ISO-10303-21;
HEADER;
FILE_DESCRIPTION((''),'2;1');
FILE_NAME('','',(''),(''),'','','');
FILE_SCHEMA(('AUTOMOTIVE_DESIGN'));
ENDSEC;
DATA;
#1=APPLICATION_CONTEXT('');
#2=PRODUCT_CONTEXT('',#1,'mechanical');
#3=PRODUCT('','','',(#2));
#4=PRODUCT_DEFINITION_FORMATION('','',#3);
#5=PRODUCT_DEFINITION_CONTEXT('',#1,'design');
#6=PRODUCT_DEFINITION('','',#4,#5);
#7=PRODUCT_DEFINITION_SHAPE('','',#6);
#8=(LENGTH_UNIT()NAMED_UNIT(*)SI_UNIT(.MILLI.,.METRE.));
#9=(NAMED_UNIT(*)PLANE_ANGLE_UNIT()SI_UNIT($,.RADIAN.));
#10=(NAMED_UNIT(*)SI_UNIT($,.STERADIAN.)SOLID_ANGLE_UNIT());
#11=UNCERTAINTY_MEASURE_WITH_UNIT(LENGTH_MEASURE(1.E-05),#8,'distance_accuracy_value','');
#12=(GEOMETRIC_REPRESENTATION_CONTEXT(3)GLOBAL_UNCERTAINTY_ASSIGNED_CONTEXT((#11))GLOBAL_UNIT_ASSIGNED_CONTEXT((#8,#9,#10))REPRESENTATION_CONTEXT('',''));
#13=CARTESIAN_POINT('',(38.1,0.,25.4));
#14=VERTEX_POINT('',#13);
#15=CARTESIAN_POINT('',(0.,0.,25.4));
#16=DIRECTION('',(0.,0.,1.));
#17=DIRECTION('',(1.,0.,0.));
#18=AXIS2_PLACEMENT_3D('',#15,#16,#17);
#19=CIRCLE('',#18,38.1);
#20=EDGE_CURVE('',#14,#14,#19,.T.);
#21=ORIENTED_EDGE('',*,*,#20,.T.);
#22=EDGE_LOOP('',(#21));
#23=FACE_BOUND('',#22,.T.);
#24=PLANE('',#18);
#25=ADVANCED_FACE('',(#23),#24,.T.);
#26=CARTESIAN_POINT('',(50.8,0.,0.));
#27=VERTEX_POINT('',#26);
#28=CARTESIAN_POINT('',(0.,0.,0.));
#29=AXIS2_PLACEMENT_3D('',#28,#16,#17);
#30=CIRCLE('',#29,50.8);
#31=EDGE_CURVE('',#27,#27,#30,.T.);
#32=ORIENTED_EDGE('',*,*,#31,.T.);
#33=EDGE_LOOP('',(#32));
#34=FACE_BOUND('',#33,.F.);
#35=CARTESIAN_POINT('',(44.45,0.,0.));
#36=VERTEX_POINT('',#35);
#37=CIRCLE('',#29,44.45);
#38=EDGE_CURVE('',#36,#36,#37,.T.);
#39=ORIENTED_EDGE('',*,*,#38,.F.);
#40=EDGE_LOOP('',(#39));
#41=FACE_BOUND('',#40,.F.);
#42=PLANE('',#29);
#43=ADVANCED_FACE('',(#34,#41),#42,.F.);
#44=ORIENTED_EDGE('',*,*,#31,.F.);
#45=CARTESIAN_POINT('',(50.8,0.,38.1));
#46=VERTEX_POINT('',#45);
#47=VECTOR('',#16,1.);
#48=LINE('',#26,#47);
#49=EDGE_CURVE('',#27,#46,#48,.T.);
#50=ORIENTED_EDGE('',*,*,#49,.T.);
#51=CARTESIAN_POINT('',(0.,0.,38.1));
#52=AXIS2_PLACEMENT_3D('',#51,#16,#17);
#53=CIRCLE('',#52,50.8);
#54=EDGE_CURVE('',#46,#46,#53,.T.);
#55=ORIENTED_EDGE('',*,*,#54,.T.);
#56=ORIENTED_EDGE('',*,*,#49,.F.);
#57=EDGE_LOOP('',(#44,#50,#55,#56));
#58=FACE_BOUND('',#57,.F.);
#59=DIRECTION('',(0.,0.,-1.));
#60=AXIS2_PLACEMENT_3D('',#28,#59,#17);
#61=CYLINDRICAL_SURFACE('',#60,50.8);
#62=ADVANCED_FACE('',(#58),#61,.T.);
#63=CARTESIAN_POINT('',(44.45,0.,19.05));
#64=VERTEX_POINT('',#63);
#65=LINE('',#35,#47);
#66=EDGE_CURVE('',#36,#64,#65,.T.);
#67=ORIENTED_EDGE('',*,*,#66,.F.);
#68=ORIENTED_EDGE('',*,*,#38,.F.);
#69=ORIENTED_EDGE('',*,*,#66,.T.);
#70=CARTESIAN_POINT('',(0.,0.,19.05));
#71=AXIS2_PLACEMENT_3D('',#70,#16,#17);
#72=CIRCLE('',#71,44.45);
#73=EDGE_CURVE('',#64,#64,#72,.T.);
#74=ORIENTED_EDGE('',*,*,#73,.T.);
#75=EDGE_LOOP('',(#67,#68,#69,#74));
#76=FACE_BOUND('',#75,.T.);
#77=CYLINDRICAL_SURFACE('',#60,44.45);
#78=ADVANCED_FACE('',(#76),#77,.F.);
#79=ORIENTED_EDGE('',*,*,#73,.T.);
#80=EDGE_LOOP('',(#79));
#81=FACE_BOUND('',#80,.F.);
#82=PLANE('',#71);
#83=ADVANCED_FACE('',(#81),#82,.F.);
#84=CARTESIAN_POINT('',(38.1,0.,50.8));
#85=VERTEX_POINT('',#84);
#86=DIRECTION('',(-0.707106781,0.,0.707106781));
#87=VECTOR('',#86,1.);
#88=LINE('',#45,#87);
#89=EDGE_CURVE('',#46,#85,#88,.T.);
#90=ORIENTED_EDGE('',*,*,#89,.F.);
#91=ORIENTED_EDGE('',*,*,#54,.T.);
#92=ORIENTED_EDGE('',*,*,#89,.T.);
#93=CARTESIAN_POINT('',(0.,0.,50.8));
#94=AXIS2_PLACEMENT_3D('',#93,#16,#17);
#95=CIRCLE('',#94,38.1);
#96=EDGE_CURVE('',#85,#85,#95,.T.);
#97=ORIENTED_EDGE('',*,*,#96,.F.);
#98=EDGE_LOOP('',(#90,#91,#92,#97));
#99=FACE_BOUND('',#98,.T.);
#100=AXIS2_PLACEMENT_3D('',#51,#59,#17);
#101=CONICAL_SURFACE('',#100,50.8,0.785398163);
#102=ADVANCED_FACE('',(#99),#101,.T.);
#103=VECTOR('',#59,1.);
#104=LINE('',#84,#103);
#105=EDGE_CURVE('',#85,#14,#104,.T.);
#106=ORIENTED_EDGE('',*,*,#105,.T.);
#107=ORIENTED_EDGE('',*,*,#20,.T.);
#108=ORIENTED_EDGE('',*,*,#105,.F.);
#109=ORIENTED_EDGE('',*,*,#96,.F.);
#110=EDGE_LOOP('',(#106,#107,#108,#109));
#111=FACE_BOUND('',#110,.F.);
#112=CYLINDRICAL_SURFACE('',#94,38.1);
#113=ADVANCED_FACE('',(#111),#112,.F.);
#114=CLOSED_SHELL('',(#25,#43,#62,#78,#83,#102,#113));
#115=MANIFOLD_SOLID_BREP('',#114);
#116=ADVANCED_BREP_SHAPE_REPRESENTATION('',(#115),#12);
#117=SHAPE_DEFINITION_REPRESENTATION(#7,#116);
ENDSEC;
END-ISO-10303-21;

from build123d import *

# Parameters (mm, degrees)
F0_R     = 50.8
F1_DEPTH = 50.8
F2_SIZE  = 12.7
F3_DEPTH = 25.4
F4_T     = 6.35


# Not quite as in the source:
# - a shell that OpenCascade refuses in one call is made with other operations: the cavity is built on its own and cut out


with BuildPart() as f1:
    # F0 (on Top) → F1 (new body)
    with BuildSketch(Plane.XY):
        Circle(F0_R)
    extrude(amount=F1_DEPTH)

    # F2
    f2_edges = [f1.edges().sort_by_distance(p)[0] for p in [
        (-50.8, 0, 50.8),
    ]]
    chamfer(f2_edges, length=F2_SIZE)

    # F3 (cut): a face of the model
    f3_faces = [f1.faces().sort_by_distance(p)[0] for p in [
        (0, 0, 50.8),
    ]]
    extrude(f3_faces, amount=-F3_DEPTH, mode=Mode.SUBTRACT)

    # F4: shell of thickness 6.35, made by hand


with BuildPart() as f4_core1:
    # F4_t2: copy of F1
    add(f1.part)

    # the walls: a layer under each face that stays
    f4_faces = [f4_core1.faces().sort_by_distance(p)[0] for p in [
        (-50.8, 0, 19.05),
        (-44.45, 0, 44.45),
        (-38.1, 0, 38.1),
        (0, 0, 25.4),
    ]]
    thicken(f4_faces, amount=-F4_T, mode=Mode.SUBTRACT)

    # F4_s3 → F4_t4 (revolve, cut)
    with BuildSketch(Plane.XZ):
        Polygon((38.0365, 25.4635), (44.45, 25.4), (44.45, 19.05), (38.1, 19.05), align=None)
    revolve(axis=Axis((0, 0, 25.4), (0, 0, 1)), mode=Mode.SUBTRACT)


with BuildPart() as f1_1:
    add(f1.part)

    # what is left inside the walls is the cavity
    f4_cavity = [f4_core1.part.solids().sort_by_distance(p)[0] for p in [
        (0, -14.816667, 18.9865),
    ]]
    add(f4_cavity, mode=Mode.SUBTRACT)


solid = f1_1.part
